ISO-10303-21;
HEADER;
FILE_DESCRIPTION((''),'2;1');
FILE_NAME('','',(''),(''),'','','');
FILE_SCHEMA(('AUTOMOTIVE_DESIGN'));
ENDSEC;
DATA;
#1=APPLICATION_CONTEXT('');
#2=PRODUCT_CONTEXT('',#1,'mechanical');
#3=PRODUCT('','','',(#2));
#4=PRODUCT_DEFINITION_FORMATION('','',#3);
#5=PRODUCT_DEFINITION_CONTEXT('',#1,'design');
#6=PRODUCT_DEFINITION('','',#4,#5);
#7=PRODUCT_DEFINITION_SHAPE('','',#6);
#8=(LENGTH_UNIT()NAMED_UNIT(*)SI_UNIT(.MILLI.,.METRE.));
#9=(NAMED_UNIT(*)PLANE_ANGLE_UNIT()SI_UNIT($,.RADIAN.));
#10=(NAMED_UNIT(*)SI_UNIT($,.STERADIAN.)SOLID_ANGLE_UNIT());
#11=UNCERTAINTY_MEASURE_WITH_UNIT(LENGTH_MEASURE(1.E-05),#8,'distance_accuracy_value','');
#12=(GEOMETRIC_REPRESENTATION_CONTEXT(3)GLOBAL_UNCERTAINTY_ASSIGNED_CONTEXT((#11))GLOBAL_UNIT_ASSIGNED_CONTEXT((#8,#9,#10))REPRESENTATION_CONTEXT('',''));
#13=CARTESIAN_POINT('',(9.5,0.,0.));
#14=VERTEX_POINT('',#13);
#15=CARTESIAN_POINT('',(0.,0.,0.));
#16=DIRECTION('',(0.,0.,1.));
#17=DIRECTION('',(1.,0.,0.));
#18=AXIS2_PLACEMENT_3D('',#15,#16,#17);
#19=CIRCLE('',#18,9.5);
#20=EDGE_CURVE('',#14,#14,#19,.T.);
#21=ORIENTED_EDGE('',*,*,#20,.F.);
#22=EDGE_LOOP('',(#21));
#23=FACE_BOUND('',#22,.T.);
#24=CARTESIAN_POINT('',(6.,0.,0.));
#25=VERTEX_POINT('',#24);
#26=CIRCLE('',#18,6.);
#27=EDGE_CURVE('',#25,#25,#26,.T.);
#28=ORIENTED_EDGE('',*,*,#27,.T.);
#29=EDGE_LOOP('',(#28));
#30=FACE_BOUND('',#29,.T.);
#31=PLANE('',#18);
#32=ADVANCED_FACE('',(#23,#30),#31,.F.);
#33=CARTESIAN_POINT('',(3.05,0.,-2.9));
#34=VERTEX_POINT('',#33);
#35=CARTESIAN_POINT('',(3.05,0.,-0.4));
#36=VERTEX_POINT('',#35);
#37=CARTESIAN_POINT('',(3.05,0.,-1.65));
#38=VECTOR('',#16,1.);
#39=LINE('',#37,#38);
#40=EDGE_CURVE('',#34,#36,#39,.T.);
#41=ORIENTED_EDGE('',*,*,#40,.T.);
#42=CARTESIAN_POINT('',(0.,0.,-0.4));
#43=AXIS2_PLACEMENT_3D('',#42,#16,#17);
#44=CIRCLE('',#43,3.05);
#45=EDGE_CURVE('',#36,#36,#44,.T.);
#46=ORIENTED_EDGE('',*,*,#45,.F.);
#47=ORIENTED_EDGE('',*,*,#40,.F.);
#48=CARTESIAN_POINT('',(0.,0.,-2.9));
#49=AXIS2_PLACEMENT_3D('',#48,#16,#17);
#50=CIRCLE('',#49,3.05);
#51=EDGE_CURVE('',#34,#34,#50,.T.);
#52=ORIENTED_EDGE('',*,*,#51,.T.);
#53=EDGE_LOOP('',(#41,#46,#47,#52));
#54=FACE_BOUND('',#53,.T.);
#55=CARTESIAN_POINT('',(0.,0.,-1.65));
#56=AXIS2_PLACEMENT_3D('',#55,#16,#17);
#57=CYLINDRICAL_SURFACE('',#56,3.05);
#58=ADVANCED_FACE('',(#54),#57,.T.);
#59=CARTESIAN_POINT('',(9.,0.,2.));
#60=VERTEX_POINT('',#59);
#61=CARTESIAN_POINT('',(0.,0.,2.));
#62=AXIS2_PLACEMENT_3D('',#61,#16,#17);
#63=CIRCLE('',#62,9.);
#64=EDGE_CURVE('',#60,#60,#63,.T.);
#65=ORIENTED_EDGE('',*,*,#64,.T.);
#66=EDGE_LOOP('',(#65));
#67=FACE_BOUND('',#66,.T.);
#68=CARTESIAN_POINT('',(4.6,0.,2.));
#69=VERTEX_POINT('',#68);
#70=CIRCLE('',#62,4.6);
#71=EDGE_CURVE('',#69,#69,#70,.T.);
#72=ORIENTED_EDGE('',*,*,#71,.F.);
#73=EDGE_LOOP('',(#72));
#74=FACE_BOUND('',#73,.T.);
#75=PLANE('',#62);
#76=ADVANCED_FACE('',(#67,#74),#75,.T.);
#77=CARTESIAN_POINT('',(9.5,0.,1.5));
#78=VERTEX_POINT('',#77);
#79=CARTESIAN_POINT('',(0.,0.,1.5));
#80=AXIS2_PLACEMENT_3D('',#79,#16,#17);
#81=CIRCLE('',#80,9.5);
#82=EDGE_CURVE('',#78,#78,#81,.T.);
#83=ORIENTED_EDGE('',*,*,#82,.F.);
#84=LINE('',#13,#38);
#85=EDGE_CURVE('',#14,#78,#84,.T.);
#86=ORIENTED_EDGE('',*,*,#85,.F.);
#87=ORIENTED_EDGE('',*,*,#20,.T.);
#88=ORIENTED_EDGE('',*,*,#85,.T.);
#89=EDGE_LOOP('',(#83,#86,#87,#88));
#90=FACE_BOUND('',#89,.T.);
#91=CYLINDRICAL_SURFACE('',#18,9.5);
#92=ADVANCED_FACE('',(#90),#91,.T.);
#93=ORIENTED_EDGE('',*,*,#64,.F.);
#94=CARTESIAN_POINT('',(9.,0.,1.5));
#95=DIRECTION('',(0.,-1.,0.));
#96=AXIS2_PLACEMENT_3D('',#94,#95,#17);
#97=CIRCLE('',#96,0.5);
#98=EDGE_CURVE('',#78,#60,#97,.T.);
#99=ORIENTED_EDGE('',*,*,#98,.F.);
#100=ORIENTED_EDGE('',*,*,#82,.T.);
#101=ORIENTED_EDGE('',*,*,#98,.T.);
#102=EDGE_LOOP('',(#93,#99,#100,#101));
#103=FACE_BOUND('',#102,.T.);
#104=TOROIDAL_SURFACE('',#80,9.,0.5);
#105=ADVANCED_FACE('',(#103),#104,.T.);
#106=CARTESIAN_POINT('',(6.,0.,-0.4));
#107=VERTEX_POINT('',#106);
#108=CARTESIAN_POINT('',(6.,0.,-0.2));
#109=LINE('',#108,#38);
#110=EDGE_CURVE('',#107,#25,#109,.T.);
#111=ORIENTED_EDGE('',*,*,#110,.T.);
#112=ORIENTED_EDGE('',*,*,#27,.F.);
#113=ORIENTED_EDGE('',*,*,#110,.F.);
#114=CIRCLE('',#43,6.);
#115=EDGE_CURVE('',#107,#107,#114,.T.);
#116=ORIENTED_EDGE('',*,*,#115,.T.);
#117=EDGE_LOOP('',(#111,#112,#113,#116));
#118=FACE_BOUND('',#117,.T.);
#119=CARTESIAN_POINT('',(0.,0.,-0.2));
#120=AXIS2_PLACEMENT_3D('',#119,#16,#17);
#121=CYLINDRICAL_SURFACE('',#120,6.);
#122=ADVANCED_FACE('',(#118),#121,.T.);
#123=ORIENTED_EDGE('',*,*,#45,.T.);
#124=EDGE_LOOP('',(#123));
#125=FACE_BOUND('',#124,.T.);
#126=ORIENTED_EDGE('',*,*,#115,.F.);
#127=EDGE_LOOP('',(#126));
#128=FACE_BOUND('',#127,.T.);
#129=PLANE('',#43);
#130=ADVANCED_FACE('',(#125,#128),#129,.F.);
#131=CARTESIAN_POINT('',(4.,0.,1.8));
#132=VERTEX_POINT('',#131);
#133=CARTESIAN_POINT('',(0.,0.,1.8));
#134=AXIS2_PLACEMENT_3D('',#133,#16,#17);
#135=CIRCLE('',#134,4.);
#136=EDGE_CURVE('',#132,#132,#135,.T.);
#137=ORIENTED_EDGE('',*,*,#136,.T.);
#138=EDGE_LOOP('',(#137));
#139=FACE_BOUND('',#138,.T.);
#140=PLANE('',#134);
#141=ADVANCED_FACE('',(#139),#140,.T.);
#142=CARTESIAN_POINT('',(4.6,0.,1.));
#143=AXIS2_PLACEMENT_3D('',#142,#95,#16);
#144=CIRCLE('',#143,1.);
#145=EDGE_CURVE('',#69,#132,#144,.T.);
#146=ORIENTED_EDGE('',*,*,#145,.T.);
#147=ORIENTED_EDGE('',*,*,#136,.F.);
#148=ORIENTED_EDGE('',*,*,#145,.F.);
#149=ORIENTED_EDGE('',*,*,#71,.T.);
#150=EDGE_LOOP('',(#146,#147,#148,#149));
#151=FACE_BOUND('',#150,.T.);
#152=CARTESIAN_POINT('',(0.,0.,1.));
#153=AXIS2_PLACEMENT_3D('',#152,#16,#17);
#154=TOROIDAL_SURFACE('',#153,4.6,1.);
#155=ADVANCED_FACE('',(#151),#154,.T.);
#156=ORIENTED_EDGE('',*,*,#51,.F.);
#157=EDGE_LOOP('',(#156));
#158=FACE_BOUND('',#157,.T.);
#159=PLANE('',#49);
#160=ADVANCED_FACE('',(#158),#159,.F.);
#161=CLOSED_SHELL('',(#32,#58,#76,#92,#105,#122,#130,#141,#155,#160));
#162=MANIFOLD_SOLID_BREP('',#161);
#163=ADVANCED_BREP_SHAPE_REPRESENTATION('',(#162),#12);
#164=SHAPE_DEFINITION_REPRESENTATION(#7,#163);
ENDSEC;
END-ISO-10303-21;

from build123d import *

# Parameters (mm, degrees)
F0_W   = 3.05
F0_H   = 0.4
F0_W_2 = 2.95
F0_H_2 = 2.5
F2_R   = 0.5


# Not quite as in the source:
# - a fillet or chamfer that OpenCascade refuses, or shapes differently, is made with other operations: its cross-section is extruded or revolved along the edge and cut away or added
# - a feature names something its author has since deleted; it is built from what else it names


with BuildPart() as f1:
    # F0 (on Front) → F1 (revolve)
    with BuildSketch(Plane.XZ):
        Polygon((0, 1.8), (0, 0), (3.05, 0), (6, 0), (9.5, 0), (9.5, 2), (4, 2), (4, 1.8), align=None)
        with Locations((1.525, -0.2)):
            Rectangle(F0_W, F0_H)
        with Locations((4.525, -0.2)):
            Rectangle(F0_W_2, F0_H)
        with Locations((1.525, -1.65)):
            Rectangle(F0_W, F0_H_2)
    revolve(axis=Axis((0, 0, 0.9), (0, 0, 1)))

    # F2
    f2_edges = [f1.edges().sort_by_distance(p)[0] for p in [
        (-9.5, 0, 2),
    ]]
    fillet(f2_edges, radius=F2_R)

    # F3: fillet of radius 1 on 1 edges, made by hand

    # F3_s1 → F3_t2 (revolve, cut)
    with BuildSketch(Plane.XZ):
        with BuildLine():
            ThreePointArc((4.6, 2), (4.283772234, 1.9486832981), (4, 1.8))
            Line((4, 1.8), (4, 2))
            Line((4, 2), (4.6, 2))
        make_face()
    revolve(axis=Axis((0, 0, 2), (0, 0, 1)), mode=Mode.SUBTRACT)


solid = f1.part
